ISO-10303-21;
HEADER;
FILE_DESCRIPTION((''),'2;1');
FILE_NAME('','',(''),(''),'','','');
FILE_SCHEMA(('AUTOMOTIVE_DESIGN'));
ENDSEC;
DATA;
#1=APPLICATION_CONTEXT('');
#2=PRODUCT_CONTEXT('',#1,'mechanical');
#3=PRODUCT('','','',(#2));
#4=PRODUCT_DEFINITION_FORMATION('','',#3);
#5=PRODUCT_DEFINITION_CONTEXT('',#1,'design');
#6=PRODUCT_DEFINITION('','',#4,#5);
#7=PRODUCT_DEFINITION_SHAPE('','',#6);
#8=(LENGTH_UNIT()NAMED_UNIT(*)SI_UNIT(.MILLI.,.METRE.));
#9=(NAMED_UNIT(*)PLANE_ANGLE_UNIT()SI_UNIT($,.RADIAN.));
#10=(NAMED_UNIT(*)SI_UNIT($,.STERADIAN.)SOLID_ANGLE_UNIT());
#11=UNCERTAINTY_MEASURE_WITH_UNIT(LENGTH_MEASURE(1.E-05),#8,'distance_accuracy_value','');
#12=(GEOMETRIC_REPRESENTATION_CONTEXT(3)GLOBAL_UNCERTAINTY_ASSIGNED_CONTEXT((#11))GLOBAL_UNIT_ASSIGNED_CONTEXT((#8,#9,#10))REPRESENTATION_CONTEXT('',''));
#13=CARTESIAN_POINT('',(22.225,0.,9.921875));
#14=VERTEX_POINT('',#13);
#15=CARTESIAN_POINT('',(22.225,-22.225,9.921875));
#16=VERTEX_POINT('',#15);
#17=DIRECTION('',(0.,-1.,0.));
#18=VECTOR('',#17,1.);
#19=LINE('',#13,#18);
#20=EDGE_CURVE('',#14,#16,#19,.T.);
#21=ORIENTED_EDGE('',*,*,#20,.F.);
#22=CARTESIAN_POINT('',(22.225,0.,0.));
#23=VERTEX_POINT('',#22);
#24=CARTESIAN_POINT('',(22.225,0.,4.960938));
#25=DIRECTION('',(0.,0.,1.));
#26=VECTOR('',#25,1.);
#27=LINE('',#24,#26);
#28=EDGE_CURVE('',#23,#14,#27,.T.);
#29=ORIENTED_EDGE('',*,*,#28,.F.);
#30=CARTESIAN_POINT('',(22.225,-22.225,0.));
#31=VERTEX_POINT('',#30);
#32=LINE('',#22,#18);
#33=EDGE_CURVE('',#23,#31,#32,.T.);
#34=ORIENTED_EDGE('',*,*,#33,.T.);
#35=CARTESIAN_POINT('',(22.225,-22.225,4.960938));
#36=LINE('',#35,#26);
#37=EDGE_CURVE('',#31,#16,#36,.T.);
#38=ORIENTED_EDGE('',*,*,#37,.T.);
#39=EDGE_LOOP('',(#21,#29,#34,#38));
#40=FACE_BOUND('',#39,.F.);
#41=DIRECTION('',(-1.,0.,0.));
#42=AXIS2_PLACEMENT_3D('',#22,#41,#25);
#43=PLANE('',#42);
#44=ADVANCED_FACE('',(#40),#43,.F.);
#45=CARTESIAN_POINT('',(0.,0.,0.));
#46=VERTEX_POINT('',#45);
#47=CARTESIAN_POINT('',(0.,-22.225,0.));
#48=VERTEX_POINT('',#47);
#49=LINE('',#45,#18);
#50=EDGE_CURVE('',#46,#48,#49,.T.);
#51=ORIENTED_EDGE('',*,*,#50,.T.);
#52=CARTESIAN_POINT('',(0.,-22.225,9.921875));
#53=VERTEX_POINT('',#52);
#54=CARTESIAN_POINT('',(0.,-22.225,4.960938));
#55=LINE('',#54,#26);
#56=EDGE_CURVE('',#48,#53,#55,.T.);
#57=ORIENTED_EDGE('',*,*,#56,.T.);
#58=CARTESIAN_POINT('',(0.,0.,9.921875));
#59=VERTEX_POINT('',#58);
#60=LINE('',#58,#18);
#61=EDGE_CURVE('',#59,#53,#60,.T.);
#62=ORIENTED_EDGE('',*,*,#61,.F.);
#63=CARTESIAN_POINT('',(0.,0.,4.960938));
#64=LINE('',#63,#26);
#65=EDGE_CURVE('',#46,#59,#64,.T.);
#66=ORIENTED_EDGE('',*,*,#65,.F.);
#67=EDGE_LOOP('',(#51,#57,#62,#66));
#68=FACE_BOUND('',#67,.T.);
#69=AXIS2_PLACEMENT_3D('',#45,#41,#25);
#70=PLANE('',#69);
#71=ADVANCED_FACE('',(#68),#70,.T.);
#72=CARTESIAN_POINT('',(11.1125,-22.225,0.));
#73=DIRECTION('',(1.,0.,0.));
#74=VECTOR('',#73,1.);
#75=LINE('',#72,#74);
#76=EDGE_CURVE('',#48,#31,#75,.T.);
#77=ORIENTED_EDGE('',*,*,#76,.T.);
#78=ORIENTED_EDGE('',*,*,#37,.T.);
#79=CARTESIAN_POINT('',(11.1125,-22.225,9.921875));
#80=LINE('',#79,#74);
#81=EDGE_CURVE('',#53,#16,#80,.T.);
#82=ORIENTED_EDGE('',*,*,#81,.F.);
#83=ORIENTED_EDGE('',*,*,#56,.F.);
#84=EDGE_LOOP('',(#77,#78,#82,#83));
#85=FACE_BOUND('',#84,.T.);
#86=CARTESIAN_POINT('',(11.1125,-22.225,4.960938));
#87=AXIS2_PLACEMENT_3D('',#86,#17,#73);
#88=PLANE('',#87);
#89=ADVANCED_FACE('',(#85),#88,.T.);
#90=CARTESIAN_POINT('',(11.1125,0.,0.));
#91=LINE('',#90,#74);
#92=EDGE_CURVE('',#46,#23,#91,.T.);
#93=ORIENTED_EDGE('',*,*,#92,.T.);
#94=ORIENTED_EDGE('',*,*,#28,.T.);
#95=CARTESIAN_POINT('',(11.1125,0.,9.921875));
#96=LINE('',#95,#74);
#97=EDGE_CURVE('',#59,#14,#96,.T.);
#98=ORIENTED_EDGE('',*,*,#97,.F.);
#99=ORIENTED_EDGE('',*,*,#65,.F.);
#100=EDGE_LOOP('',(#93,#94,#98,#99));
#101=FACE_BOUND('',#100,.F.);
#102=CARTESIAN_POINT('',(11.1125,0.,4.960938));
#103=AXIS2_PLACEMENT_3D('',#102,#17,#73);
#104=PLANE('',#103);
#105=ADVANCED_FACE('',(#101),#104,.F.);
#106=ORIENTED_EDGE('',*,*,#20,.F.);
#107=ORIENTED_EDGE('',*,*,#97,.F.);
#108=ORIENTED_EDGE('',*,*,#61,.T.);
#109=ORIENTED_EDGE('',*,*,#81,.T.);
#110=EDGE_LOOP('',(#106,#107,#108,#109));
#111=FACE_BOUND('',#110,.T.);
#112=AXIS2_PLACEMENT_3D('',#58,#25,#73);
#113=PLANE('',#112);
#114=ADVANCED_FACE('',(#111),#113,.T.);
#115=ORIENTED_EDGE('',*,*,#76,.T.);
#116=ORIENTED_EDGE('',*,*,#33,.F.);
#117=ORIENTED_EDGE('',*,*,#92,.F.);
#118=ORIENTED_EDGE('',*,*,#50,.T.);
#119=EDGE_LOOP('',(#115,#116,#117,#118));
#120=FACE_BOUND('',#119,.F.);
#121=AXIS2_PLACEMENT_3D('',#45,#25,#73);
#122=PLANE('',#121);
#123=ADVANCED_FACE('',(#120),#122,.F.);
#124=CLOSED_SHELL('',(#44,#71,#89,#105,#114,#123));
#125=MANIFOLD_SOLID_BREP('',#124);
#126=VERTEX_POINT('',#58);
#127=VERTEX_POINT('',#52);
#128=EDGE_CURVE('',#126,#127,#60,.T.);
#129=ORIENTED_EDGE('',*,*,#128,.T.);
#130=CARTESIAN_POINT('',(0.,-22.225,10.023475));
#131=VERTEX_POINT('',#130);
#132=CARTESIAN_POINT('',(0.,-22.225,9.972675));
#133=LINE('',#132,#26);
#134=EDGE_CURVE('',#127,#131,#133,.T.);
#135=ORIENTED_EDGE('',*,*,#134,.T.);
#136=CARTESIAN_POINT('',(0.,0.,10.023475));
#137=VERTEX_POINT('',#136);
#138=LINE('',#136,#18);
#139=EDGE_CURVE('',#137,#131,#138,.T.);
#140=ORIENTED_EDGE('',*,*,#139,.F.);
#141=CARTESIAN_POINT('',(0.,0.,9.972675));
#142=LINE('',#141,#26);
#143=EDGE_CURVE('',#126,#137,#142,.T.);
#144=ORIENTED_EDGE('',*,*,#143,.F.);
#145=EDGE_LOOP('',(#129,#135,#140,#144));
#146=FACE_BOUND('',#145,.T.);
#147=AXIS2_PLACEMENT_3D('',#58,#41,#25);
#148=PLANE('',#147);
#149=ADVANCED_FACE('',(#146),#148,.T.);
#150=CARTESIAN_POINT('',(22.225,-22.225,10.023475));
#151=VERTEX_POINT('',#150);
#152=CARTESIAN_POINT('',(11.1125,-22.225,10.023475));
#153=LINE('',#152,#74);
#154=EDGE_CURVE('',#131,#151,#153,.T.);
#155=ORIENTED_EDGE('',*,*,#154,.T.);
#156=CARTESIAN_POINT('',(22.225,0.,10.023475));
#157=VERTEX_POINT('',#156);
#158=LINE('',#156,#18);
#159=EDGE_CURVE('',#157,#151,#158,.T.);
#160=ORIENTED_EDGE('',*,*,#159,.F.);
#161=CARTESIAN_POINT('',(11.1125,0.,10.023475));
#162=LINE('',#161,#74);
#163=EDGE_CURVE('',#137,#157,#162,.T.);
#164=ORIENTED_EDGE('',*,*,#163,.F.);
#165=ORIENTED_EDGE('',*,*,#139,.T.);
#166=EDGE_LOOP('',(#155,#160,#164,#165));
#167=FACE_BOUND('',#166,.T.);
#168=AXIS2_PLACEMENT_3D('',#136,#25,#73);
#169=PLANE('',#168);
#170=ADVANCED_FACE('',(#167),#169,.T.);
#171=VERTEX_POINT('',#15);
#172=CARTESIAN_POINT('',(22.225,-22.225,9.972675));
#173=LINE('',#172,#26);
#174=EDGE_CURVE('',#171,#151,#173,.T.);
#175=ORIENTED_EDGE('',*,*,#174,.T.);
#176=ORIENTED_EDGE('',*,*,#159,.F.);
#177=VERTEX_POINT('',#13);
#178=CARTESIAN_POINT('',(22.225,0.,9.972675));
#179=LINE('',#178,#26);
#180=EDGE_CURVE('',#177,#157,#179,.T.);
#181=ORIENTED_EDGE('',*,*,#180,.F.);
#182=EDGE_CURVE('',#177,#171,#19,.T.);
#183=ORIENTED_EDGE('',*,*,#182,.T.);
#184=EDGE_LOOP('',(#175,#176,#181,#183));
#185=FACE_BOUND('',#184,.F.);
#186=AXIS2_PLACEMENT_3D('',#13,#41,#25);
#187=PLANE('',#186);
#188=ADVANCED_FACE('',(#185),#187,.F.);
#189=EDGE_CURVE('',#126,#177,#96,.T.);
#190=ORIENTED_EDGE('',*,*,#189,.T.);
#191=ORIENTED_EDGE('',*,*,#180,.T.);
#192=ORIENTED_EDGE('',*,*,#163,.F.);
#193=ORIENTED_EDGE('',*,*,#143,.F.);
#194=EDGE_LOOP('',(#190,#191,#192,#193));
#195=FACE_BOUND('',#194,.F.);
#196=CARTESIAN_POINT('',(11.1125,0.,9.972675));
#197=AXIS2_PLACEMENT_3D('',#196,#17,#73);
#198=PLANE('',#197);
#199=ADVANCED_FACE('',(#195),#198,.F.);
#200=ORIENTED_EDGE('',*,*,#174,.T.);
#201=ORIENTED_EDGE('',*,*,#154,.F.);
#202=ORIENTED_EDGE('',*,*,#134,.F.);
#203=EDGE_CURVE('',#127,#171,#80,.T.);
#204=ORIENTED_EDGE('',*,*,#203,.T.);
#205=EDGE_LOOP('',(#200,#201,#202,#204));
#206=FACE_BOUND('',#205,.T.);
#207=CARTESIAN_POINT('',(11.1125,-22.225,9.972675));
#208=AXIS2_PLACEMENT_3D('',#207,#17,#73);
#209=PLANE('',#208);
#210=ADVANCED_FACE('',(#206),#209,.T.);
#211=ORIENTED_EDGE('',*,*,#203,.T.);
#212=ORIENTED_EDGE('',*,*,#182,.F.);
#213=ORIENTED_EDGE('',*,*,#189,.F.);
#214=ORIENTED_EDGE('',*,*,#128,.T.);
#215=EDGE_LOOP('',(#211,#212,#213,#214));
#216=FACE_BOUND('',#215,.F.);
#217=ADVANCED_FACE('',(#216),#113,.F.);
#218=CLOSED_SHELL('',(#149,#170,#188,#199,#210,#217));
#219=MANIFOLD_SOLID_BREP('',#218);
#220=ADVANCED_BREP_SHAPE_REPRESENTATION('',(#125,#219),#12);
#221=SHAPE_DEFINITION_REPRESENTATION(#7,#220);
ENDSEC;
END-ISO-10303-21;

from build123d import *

# Parameters (mm, degrees)
F0_W     = 22.225
F0_H     = 9.921875
F1_DEPTH = 22.225
F2_W     = 22.225
F2_H     = 0.1016
F3_DEPTH = 22.225


# Not quite as in the source:
# - a length typed as a fraction of an inch, garbled in the dataset ("3 / 203.2 mm" for 3/8 in), is restored
# - a feature names something its author has since deleted; it is built from what else it names


with BuildPart() as f1:
    # F0 (on Front) → F1 (new body)
    with BuildSketch(Plane.XZ):
        with Locations((11.1125, 4.9609375)):
            Rectangle(F0_W, F0_H)
    extrude(amount=F1_DEPTH)


with BuildPart() as f3:
    # F2 (on Front) → F3 (new body)
    with BuildSketch(Plane.XZ):
        with Locations((11.1125, 9.972675)):
            Rectangle(F2_W, F2_H)
    extrude(amount=F3_DEPTH)


solid = Compound([f1.part, f3.part])
